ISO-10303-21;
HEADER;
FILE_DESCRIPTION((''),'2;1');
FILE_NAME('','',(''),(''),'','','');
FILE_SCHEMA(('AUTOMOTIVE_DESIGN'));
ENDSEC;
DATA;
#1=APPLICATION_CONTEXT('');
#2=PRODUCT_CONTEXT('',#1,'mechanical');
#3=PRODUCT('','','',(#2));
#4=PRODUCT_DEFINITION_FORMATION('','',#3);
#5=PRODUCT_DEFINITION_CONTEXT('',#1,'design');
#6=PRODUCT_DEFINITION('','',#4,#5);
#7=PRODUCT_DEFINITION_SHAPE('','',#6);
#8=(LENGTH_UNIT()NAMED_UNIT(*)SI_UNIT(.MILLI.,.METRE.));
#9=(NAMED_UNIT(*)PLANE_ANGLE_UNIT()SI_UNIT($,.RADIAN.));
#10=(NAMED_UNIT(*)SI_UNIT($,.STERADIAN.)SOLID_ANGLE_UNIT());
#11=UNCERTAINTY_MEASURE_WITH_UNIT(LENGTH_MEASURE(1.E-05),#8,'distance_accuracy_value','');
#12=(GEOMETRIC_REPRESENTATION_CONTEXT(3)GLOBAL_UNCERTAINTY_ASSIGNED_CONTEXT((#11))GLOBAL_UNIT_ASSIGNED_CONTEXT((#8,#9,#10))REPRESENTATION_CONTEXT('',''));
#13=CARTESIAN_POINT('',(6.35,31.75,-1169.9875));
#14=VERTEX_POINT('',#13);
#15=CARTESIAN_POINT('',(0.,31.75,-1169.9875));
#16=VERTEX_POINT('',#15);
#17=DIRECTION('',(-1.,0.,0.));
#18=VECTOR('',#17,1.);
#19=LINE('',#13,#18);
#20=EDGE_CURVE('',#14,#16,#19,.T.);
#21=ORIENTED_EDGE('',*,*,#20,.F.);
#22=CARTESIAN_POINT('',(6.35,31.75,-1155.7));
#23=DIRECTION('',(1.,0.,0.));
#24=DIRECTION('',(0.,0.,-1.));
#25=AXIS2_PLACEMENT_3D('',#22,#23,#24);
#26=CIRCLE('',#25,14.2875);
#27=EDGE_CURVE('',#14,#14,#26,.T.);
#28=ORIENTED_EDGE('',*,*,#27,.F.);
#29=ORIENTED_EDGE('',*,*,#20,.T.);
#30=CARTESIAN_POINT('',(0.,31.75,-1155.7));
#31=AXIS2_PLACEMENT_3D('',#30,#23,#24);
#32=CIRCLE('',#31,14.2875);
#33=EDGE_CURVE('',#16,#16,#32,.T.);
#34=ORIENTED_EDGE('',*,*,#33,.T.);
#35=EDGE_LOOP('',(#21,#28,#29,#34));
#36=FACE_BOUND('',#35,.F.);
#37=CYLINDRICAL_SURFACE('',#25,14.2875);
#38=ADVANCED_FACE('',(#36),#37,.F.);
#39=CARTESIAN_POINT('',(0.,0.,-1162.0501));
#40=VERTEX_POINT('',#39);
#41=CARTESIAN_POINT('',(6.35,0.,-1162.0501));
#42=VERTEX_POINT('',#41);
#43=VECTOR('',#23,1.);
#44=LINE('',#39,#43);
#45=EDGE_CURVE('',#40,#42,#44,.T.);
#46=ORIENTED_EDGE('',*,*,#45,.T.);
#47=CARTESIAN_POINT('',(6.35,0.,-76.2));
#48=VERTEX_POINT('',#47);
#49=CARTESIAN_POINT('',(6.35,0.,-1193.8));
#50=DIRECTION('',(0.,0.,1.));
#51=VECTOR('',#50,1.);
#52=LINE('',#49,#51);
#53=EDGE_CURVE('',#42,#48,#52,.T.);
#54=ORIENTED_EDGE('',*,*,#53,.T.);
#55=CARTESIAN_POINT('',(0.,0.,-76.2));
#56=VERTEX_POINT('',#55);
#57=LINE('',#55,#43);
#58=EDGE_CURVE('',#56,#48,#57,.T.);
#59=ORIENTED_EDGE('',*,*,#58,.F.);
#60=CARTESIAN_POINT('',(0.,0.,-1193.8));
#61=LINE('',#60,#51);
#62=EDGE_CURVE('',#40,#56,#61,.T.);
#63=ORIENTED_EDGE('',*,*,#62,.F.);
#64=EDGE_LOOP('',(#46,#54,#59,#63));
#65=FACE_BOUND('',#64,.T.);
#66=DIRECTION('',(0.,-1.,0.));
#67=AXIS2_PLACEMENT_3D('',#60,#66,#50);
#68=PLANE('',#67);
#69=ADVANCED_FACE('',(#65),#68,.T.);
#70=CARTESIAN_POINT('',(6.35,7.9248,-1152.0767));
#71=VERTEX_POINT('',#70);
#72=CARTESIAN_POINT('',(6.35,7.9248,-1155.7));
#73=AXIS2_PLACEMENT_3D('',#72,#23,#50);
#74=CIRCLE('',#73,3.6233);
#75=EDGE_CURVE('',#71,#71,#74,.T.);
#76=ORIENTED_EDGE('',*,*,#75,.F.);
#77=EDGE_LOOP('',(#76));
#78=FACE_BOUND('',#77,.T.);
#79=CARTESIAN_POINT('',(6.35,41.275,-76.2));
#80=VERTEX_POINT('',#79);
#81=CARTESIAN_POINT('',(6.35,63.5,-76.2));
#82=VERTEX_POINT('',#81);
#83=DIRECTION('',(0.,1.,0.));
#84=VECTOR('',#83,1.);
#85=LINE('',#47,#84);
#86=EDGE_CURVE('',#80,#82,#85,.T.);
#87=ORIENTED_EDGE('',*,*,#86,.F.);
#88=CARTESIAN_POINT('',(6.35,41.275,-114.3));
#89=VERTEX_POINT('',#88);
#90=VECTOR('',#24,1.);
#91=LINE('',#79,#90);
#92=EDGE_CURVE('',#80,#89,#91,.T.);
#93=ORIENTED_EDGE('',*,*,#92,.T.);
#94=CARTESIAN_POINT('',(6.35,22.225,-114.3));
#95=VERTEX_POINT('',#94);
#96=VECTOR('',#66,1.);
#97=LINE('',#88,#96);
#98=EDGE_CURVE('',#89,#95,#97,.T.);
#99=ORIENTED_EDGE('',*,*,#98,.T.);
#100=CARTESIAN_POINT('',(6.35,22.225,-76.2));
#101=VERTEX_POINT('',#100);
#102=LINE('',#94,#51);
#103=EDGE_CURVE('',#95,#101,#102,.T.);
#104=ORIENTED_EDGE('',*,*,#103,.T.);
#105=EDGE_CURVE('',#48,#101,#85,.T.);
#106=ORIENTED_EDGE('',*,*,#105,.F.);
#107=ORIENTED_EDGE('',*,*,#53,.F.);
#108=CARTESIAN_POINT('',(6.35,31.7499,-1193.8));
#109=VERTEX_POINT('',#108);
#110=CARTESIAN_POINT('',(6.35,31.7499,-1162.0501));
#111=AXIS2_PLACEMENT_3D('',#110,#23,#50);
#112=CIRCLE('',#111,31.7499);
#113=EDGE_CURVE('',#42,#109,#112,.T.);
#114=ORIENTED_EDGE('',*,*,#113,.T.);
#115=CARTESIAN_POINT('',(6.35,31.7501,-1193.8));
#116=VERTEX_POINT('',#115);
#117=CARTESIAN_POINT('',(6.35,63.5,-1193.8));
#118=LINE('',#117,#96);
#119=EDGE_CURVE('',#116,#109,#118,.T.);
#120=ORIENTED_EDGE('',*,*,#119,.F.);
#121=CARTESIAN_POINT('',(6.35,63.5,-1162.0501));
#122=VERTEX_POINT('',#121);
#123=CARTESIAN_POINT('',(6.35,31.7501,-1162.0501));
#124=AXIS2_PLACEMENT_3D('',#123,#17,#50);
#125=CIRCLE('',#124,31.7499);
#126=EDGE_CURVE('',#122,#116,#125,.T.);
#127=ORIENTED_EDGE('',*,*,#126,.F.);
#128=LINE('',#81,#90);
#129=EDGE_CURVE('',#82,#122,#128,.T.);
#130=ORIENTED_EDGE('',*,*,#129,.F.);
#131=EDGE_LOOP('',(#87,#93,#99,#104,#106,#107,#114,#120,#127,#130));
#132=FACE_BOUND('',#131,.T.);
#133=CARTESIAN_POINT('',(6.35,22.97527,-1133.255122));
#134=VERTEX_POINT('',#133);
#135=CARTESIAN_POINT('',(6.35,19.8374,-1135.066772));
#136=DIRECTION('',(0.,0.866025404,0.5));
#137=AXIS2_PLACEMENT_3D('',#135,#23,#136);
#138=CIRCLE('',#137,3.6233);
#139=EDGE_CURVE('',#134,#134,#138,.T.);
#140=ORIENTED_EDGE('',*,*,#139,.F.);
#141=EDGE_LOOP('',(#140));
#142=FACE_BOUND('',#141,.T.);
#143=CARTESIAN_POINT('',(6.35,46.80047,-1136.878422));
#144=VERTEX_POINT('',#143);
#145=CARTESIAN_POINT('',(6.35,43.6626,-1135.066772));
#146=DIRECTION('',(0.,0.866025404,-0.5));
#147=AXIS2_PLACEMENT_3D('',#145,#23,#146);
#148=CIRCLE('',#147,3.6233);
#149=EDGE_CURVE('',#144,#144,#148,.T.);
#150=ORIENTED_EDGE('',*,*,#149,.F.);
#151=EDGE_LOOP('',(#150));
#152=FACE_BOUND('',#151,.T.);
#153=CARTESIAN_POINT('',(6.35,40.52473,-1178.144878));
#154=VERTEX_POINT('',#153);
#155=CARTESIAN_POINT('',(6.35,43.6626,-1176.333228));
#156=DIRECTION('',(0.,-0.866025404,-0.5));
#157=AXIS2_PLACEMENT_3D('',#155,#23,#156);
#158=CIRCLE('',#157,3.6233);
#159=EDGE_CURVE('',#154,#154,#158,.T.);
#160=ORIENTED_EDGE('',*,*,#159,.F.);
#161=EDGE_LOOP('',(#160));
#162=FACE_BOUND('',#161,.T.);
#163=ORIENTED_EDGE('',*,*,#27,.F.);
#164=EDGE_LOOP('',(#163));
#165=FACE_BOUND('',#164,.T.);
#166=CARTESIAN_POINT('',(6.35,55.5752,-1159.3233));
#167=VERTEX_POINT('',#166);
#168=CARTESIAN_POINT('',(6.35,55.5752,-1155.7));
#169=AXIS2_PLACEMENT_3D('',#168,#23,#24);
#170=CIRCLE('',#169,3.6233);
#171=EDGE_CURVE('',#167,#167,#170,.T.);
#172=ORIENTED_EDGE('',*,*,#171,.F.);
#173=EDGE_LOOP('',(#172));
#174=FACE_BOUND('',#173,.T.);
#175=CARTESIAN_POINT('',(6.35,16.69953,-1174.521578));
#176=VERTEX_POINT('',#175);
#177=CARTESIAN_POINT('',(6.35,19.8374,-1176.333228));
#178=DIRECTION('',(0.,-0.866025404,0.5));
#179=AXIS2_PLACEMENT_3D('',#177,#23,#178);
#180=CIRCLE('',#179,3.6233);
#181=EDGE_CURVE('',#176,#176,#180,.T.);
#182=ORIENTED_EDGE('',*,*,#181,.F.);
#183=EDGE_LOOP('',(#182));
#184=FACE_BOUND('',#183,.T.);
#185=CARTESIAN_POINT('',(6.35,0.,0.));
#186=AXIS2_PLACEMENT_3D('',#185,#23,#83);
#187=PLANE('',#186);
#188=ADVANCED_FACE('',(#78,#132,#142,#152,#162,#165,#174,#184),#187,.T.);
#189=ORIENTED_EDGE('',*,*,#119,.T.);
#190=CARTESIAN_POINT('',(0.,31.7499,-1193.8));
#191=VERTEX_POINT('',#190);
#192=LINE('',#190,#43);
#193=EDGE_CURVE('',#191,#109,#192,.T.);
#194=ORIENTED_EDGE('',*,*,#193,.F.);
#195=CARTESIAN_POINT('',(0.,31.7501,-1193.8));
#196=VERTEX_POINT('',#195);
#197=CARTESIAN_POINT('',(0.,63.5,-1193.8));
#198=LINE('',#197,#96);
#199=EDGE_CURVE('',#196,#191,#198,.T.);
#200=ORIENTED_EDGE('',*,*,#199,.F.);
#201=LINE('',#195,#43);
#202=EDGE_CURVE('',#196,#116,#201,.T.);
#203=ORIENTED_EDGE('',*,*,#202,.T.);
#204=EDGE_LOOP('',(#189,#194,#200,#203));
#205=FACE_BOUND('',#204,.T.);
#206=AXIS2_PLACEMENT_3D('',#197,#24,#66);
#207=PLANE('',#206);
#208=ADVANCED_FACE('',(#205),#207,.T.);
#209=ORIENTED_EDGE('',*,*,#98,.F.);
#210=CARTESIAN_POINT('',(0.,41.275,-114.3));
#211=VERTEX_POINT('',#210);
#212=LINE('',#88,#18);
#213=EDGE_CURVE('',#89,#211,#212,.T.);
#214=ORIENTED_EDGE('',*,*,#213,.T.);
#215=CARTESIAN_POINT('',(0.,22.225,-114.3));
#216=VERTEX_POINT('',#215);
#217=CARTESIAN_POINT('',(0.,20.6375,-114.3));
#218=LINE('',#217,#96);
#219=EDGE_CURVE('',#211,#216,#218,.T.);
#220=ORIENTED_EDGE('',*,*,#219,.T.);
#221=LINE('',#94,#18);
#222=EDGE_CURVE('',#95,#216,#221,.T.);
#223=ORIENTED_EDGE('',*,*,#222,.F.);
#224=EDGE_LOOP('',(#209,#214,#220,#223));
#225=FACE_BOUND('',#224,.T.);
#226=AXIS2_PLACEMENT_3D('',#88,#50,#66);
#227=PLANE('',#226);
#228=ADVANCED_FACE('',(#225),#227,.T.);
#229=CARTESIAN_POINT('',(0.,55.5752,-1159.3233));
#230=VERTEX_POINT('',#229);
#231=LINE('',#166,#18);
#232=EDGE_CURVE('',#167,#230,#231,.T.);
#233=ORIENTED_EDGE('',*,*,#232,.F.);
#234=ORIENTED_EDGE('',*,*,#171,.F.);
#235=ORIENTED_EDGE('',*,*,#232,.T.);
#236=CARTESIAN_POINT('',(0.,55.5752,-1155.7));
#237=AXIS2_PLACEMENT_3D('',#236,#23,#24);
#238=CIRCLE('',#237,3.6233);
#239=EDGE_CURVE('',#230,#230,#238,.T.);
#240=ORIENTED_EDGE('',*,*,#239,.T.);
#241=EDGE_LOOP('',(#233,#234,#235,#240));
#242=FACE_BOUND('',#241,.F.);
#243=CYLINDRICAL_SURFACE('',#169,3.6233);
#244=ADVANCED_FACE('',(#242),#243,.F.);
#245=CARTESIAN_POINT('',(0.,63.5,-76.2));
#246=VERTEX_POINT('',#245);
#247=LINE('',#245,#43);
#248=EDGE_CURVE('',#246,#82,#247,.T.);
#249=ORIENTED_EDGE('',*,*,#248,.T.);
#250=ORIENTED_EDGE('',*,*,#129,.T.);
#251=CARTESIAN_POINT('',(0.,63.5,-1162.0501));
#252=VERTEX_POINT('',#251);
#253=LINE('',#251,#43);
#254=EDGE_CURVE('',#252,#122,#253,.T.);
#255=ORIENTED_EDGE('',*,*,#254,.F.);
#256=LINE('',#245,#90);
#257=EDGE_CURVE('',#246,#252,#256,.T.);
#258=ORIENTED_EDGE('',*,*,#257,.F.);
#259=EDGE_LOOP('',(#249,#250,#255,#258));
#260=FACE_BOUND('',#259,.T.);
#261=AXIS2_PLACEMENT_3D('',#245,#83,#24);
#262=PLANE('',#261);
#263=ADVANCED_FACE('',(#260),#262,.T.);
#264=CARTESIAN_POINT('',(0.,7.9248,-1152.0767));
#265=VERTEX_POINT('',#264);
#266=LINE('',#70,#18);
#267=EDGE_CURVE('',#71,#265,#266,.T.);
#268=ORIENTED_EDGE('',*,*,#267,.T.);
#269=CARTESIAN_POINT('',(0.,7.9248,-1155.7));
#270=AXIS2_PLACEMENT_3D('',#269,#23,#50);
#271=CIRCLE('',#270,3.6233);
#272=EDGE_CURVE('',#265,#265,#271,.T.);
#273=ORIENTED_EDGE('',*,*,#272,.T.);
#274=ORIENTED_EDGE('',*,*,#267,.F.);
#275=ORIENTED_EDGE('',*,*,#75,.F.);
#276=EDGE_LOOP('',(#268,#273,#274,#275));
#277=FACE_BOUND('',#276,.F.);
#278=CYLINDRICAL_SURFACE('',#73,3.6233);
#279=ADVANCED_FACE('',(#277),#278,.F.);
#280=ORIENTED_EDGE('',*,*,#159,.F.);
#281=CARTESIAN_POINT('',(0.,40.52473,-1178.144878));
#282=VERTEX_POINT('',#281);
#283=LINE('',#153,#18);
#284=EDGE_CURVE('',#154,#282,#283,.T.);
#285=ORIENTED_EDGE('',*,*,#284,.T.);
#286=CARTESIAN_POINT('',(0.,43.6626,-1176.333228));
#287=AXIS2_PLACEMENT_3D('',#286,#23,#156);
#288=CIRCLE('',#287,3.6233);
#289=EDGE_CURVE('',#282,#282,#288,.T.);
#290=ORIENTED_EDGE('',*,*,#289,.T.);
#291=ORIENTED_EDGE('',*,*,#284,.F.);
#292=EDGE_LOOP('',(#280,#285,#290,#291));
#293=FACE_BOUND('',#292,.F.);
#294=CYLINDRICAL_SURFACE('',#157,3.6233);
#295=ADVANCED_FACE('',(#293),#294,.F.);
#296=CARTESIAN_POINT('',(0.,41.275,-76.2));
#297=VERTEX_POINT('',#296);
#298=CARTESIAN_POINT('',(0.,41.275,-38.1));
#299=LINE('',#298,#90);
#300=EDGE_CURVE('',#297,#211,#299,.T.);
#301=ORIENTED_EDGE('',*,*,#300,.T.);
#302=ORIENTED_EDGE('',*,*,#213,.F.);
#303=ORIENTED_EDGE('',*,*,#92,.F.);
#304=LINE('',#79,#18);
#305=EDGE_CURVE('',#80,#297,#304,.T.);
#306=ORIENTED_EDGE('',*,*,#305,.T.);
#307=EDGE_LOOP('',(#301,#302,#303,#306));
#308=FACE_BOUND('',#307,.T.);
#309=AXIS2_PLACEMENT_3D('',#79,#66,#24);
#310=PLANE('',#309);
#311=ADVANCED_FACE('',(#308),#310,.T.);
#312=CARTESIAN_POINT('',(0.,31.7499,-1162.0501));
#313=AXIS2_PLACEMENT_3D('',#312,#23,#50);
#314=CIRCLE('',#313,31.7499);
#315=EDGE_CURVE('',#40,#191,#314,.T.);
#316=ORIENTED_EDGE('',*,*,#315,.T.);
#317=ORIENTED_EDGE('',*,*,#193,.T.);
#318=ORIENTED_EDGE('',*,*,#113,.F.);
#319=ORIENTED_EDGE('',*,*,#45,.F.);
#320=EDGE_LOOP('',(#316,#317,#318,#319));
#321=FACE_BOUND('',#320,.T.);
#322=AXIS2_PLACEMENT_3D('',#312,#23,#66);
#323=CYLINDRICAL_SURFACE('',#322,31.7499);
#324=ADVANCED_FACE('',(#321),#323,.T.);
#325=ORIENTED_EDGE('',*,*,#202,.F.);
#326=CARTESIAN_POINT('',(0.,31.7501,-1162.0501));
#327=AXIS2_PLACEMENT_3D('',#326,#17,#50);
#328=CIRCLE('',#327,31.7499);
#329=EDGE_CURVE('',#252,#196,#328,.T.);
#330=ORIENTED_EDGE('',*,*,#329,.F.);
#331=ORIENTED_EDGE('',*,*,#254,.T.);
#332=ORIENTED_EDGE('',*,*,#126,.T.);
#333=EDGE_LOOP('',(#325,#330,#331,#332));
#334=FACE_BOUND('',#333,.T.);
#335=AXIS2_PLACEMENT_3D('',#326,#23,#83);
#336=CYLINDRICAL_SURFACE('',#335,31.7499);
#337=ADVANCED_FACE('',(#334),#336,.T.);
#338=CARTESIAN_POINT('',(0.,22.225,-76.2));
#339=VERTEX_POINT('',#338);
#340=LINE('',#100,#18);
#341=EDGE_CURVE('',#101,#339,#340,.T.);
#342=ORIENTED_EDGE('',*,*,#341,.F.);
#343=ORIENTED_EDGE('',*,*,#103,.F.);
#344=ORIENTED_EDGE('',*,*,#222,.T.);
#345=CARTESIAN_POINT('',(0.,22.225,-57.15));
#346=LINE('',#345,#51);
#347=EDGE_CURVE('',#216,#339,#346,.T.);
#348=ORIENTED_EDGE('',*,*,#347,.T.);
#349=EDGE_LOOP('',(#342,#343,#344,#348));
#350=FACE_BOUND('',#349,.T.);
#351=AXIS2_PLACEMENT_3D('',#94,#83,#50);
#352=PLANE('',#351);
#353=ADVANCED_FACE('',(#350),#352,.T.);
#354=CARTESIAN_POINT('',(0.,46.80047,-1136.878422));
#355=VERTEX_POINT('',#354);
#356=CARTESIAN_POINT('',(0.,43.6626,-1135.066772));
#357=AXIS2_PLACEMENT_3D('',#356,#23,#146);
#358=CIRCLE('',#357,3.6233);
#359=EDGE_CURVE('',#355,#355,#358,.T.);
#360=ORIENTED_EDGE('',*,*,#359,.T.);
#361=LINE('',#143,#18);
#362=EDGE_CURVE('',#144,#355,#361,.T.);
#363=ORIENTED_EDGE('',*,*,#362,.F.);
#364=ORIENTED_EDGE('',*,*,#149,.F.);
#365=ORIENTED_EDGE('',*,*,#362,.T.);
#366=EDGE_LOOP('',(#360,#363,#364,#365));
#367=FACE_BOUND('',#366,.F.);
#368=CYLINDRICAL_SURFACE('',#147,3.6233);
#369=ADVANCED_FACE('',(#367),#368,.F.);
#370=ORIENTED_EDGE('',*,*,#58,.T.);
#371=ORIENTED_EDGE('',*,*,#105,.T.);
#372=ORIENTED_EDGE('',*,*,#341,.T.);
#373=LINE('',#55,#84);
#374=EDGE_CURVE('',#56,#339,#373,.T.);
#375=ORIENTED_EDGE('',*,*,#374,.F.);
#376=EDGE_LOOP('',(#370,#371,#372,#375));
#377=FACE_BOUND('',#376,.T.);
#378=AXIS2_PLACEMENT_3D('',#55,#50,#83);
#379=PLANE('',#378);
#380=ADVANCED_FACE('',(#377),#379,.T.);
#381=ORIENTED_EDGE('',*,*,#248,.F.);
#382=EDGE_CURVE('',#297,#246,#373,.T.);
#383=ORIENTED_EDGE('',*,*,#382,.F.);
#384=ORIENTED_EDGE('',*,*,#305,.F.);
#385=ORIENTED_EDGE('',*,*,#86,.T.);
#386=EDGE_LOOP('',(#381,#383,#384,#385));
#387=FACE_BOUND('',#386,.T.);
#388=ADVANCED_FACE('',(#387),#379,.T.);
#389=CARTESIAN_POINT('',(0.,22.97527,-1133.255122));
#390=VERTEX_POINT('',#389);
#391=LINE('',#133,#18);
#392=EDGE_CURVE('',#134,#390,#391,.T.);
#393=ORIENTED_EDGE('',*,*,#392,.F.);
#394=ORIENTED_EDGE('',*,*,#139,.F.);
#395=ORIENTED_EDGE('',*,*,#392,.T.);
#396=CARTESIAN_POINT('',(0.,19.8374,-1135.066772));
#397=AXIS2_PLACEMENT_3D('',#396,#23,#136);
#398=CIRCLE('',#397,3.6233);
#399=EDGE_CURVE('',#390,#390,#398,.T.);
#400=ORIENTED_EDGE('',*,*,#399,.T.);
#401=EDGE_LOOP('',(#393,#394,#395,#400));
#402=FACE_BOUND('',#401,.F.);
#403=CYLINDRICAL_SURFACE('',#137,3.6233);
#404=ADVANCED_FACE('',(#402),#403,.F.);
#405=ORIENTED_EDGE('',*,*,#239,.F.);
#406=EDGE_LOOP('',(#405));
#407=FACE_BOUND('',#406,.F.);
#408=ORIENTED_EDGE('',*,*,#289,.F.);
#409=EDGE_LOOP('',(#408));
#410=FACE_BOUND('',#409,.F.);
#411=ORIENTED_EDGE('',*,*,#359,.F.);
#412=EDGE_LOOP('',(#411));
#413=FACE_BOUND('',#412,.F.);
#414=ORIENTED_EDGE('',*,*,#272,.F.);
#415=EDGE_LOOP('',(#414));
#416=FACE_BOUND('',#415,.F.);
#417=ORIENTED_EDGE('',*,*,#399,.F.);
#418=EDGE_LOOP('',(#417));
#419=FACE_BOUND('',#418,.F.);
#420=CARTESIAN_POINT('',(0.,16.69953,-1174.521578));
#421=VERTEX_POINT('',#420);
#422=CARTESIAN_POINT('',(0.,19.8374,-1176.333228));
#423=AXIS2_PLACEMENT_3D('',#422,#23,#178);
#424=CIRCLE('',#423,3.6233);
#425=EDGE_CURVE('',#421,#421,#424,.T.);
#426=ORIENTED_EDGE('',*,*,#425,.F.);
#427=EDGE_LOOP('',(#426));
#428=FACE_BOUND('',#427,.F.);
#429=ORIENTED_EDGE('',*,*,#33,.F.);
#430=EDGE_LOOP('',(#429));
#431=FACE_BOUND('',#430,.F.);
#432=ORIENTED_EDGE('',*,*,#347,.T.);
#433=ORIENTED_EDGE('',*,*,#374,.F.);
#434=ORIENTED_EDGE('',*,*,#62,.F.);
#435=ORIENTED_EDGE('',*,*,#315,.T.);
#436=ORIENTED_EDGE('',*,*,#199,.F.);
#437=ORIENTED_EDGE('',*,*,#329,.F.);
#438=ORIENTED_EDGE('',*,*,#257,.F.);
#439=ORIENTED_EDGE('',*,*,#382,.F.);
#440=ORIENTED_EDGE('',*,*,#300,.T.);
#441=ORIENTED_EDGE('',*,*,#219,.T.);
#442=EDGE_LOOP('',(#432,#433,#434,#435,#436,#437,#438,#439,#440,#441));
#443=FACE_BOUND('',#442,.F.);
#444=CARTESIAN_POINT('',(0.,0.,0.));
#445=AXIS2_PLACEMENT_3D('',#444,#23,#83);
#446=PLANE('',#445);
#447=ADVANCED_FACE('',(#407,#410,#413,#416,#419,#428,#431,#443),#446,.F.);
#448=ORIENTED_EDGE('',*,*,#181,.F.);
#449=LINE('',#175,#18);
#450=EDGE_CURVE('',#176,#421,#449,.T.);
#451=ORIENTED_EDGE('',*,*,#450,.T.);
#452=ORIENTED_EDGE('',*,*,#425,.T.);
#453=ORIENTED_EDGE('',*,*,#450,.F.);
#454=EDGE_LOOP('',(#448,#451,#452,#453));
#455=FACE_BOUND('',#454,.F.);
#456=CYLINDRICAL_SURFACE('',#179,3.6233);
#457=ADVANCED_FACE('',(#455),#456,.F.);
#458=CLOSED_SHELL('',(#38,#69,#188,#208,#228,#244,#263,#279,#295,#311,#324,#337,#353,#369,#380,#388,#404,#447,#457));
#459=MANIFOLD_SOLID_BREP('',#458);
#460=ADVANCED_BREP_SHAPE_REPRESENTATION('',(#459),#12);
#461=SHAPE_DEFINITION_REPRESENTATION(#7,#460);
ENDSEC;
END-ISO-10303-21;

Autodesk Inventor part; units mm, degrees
ref_plane "YZ Plane" through (0, 0, 0) normal (1, 0, 0) x (0, 1, 0)
ref_plane "XZ Plane" through (0, 0, 0) normal (0, 1, 0) x (-1, 0, 0)
ref_plane "XY Plane" through (0, 0, 0) normal (0, 0, 1) x (1, 0, 0)
sketch "Sketch1" plane through (0, 0, 0) normal (1, 0, 0) x (0, 1, 0)
  line L0 (0, -76.2) -> (63.5, -76.2)
  line L1 (63.5, -76.2) -> (63.5, -1193.8)
  line L2 (63.5, -1193.8) -> (0, -1193.8)
  line L3 (0, -1193.8) -> (0, -76.2)
  dimension "d0" = 63.5
  dimension "d1" = 1117.6
extrude "Extrusion1" add sketch "Sketch1" along normal blind 6.35
sketch "Sketch2" plane through (6.35, 0, 0) normal (1, 0, 0) x (0, 0, -1)
  line L0 (1193.8, 63.5) -> (76.2, 63.5) projected
  line L1 (1155.7, 63.5) -> (1155.7, 0) construction
  line L2 (0, 0) -> (1193.8, 0) projected
  circle A0 centre (1155.7, 31.75) radius 14.2875
  dimension "d5" = 1155.7
  dimension "d24" = 28.575
extrude "Extrusion2" cut sketch "Sketch2" against normal through all
fillet "Fillet1" radius 31.75 2 edges at (3.175, 63.5, -1193.8) (3.175, 0, -1193.8)
sketch "Sketch5" plane through (6.35, 0, 0) normal (1, 0, 0) x (0, 0, -1)
  circle A0 centre (1155.7, 31.75) radius 14.2875 projected
  line L0 (1155.7, 31.75) -> (1155.7, 55.5752) construction
  circle A1 centre (1155.7, 55.5752) radius 3.6233
  point P0 (0, 0)
  dimension "d32" = 23.8252
extrude "Extrusion5" cut sketch "Sketch5" against normal through all contours A1
pattern_circular "Circular Pattern1" count 6 over 360 about axis through (6.35, 31.75, -1155.7) along (-1, 0, 0) of "Extrusion5"
sketch "Sketch8" plane through (6.35, 0, 0) normal (1, 0, 0) x (0, 0, -1)
  line L0 (76.2, 41.275) -> (114.3, 41.275)
  line L1 (114.3, 41.275) -> (114.3, 22.225)
  line L2 (114.3, 22.225) -> (76.2, 22.225)
  line L3 (76.2, 22.225) -> (76.2, 41.275)
  line L4 (76.2, 63.5) -> (76.2, 0) projected
  point P0 (0, 0)
  point P1 (76.2, 31.75)
  dimension "d44" = 38.1
  dimension "d45" = 19.05
extrude "Extrusion8" cut sketch "Sketch8" against normal blind 25.4
properties part number "Arm"
